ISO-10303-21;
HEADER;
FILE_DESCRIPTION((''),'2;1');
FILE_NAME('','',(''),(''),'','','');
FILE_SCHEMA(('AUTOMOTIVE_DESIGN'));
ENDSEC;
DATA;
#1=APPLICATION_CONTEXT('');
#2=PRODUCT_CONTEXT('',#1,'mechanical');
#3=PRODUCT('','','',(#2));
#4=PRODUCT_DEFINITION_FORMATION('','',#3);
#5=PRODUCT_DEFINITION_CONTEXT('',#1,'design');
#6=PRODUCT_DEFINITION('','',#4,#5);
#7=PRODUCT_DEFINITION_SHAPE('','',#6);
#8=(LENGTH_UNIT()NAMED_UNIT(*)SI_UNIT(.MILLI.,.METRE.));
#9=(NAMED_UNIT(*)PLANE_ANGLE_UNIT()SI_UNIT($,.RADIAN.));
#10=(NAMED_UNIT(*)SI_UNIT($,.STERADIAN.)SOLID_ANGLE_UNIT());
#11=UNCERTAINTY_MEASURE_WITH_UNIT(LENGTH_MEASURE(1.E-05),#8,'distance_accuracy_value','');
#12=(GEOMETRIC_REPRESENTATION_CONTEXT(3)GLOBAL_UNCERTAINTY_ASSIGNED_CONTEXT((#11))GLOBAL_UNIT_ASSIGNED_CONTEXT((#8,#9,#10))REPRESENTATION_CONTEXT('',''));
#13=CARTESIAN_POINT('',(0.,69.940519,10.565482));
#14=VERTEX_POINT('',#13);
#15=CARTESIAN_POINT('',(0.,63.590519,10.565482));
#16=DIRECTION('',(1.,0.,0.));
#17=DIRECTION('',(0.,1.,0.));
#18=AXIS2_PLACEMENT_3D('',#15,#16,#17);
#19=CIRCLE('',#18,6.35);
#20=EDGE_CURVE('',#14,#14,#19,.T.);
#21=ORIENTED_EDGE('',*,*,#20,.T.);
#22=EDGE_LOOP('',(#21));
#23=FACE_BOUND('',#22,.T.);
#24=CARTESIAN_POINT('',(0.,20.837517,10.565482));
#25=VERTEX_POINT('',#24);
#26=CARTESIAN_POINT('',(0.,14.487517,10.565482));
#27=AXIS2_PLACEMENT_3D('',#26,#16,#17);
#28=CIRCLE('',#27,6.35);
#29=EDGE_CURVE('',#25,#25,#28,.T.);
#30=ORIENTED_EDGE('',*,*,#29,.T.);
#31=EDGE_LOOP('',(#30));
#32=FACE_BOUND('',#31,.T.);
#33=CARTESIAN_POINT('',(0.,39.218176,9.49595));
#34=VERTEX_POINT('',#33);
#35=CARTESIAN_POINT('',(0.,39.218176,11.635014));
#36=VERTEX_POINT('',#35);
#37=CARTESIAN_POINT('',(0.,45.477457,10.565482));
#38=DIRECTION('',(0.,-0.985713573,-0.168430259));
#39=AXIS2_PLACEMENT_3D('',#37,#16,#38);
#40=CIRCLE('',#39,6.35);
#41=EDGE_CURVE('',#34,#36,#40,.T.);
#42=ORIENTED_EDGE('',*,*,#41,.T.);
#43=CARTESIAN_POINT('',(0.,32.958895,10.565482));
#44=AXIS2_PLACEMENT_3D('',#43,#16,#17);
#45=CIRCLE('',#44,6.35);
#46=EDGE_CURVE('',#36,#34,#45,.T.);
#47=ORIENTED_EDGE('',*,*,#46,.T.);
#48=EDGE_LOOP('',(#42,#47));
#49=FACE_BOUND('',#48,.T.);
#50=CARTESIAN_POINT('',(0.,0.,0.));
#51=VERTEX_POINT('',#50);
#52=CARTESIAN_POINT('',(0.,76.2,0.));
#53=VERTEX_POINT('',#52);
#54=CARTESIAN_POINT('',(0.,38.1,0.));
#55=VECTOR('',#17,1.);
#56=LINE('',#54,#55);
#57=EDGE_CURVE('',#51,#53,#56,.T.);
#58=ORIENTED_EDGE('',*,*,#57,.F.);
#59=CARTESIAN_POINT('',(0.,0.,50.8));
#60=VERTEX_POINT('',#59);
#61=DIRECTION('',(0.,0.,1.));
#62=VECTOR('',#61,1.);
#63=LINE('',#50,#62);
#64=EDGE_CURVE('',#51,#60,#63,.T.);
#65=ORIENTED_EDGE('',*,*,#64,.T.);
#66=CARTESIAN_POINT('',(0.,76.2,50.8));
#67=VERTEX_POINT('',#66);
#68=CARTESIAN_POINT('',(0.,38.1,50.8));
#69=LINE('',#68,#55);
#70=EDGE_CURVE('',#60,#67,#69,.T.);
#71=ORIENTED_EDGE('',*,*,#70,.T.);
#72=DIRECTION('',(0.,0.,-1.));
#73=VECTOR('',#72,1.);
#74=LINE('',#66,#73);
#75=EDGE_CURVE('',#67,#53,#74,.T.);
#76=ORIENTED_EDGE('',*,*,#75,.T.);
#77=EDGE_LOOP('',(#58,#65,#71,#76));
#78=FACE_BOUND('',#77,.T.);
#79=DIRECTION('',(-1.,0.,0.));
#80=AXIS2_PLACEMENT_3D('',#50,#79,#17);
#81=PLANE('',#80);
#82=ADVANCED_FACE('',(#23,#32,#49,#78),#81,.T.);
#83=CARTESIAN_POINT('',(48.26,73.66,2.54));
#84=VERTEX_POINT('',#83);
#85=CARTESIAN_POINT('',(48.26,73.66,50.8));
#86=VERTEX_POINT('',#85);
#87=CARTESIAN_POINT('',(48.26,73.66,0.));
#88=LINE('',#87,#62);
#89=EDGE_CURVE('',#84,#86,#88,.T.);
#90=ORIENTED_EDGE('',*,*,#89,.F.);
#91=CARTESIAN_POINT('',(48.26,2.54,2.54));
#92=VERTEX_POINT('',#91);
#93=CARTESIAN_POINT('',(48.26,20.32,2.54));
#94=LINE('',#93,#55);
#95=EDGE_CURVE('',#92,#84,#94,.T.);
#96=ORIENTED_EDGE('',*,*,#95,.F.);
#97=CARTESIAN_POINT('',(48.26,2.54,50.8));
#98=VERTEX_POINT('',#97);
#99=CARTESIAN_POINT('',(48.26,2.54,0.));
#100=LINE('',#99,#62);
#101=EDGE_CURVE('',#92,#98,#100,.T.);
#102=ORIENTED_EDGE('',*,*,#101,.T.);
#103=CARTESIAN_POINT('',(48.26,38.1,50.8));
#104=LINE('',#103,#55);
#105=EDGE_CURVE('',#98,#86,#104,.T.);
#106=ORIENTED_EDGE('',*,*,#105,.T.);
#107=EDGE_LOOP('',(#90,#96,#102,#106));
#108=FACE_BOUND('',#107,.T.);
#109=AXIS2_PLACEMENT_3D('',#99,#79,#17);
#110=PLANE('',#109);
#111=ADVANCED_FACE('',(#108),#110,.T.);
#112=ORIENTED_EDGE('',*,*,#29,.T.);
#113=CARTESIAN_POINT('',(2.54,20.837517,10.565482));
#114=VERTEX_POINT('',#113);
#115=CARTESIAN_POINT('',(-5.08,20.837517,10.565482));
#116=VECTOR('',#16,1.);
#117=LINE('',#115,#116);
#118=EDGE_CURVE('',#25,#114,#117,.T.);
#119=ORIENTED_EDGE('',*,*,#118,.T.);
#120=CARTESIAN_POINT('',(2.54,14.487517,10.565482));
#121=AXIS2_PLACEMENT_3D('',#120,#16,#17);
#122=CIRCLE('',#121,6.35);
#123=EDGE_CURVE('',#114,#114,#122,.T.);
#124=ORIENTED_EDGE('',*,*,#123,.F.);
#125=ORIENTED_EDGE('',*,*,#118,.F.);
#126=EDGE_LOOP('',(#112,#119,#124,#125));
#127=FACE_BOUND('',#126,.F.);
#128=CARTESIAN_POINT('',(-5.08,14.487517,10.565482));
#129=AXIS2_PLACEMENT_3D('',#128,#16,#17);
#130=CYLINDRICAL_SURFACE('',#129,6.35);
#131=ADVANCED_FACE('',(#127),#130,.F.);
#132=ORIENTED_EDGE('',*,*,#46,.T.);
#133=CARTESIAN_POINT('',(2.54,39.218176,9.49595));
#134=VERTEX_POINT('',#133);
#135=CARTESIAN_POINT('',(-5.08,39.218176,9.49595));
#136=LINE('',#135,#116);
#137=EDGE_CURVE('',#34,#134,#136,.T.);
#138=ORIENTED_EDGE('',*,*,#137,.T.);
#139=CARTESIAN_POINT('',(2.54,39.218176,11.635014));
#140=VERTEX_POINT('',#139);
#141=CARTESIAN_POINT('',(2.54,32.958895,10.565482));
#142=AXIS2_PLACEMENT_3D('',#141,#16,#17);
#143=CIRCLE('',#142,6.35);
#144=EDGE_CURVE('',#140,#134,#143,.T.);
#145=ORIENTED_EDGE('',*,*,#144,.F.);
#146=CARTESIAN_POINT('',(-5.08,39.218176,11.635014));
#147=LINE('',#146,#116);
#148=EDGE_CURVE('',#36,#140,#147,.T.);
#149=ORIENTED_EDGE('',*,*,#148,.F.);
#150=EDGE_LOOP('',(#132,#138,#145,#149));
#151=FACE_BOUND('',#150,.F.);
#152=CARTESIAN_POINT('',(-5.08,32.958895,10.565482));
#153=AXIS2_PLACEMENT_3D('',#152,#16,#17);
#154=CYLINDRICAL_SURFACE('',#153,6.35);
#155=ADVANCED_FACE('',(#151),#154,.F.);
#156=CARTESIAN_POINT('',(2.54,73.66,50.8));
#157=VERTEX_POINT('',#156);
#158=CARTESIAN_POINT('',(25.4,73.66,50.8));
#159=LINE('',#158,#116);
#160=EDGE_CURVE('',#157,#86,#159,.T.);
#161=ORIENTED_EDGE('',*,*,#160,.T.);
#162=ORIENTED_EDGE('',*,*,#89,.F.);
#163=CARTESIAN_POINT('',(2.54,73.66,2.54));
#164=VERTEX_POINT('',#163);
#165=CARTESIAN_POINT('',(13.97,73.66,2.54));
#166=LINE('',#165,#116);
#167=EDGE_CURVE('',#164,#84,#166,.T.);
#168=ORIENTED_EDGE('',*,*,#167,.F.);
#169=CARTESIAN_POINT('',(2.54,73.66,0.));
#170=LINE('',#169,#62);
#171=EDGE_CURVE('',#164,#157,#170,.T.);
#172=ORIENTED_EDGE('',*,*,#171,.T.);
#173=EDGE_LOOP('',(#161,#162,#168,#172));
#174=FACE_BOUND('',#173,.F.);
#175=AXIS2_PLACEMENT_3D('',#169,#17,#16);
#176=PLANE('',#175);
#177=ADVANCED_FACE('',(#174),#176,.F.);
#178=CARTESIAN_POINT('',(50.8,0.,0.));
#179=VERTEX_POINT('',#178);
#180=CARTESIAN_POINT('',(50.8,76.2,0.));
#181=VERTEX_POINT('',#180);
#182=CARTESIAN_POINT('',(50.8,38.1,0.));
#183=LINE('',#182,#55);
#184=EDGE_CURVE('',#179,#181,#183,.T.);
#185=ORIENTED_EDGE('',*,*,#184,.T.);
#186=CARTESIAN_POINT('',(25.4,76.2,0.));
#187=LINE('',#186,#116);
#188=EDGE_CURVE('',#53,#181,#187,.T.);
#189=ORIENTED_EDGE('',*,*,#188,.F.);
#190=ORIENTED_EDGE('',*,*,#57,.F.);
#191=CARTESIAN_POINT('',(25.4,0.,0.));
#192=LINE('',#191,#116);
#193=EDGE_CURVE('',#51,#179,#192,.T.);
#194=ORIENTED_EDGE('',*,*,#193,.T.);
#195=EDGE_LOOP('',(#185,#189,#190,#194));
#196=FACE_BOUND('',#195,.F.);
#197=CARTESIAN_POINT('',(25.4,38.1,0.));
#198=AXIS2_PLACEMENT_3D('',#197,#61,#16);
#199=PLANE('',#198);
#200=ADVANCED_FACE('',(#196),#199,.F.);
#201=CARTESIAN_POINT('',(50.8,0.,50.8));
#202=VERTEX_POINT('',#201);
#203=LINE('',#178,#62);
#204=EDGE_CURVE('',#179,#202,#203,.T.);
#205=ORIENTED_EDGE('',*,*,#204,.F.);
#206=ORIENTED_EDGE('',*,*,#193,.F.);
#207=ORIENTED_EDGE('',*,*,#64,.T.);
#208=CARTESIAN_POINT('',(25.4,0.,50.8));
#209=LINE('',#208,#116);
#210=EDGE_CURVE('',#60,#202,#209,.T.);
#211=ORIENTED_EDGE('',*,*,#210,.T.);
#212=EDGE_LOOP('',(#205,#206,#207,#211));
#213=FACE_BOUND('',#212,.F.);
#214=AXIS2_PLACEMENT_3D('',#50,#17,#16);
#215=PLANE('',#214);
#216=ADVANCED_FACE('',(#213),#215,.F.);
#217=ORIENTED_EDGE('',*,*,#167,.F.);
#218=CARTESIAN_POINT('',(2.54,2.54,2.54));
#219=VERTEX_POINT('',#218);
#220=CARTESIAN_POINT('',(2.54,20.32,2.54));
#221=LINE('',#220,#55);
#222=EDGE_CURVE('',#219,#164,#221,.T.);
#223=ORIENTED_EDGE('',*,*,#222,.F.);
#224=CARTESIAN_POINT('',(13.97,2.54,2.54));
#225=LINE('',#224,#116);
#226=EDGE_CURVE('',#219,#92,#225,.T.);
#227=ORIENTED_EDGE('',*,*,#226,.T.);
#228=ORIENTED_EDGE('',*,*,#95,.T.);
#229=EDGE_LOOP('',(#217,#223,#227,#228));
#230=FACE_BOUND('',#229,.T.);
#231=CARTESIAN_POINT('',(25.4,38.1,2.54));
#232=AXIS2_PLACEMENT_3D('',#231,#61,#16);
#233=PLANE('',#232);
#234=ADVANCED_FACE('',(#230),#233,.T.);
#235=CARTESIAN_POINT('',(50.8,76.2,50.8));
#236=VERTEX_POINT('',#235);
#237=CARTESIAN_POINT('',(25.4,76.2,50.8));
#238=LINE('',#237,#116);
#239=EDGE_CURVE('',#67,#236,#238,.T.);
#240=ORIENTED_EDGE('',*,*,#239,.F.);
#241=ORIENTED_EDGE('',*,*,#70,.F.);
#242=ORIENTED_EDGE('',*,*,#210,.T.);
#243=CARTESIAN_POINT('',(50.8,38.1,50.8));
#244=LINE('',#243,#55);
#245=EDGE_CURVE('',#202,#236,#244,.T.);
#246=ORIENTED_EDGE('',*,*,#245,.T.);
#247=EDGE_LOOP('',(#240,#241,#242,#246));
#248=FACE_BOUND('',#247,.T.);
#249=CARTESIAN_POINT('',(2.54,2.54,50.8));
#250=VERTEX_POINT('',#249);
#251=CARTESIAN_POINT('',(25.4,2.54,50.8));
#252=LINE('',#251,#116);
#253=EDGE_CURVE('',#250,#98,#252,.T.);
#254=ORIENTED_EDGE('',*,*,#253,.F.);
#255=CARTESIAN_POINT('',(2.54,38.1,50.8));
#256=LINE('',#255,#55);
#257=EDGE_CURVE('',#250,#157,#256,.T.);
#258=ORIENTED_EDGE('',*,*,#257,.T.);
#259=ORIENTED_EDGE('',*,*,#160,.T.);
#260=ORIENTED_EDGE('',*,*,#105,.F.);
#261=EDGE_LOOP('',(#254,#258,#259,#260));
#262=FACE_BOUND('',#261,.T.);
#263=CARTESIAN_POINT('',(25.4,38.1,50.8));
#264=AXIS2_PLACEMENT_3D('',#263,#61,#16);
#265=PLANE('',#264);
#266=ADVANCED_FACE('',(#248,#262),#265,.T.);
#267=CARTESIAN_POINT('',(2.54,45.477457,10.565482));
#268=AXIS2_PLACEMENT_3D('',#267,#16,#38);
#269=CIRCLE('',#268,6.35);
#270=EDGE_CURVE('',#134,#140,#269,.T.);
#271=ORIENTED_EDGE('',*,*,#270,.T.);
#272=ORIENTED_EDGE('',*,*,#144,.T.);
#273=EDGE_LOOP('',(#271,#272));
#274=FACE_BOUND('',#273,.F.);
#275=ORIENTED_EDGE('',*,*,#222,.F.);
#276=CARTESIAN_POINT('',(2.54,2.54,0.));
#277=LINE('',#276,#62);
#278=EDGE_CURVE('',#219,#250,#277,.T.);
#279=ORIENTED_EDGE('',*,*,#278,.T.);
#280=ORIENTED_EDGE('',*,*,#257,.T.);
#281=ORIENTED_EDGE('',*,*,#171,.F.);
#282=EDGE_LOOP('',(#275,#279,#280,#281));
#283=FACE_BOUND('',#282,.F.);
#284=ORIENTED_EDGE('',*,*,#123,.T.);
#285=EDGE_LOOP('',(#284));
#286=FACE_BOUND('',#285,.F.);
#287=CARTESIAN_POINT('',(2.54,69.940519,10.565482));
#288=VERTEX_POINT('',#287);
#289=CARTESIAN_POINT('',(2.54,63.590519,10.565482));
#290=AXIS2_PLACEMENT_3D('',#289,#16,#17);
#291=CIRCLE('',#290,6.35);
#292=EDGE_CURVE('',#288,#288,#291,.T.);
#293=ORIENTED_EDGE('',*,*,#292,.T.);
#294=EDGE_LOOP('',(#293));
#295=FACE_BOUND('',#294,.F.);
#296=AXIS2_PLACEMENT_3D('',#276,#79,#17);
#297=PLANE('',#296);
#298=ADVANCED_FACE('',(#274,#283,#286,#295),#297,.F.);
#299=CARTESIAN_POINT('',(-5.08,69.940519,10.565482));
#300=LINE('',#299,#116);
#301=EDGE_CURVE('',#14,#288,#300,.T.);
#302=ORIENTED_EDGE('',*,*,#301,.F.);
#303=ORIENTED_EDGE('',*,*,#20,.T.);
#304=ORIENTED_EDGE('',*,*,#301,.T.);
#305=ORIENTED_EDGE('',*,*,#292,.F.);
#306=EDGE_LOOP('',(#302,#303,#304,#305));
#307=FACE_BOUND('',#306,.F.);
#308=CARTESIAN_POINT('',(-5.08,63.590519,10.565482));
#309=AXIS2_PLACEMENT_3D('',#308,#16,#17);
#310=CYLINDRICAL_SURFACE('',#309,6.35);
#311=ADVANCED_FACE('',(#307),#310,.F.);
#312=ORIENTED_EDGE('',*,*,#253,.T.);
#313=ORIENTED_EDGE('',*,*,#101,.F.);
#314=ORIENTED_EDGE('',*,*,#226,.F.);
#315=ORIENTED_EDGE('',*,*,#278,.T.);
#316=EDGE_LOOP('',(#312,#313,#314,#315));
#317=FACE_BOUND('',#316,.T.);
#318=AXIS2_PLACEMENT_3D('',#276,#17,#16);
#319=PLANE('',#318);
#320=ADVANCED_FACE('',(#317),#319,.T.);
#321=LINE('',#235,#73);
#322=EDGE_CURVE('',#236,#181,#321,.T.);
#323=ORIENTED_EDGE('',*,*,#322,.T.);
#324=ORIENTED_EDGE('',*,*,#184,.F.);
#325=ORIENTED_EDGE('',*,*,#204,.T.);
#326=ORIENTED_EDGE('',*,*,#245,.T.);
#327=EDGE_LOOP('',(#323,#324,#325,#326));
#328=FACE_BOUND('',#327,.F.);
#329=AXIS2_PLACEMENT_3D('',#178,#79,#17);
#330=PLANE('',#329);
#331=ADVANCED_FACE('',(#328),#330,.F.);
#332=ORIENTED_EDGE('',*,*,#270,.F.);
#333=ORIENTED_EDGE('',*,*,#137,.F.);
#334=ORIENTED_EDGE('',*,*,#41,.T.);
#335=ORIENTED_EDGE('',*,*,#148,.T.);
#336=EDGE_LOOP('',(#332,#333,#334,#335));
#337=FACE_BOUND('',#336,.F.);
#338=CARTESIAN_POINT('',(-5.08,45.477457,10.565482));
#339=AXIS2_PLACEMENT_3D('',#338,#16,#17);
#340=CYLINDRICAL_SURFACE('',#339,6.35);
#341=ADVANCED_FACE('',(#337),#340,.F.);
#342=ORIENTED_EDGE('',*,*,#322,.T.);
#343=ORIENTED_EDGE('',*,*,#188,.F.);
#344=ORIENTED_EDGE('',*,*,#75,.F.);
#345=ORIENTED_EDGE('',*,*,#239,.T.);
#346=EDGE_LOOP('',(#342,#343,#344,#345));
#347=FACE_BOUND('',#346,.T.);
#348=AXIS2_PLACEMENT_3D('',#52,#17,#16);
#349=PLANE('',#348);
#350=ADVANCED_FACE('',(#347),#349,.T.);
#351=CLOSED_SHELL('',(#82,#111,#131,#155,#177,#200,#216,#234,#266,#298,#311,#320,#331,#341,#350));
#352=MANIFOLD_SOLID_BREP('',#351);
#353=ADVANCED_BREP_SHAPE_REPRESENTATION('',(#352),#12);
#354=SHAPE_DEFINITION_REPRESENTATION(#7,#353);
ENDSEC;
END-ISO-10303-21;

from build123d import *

# Parameters (mm, degrees)
F2_W     = 50.8
F2_H     = 76.2
F2_W_2   = 45.72
F2_H_2   = 71.12
F3_DEPTH = 50.8
F4_W     = 50.8
F4_H     = 76.2
F5_DEPTH = 2.54
F8_D     = 12.7
F8_DEPTH = 5.08
F8_TIP   = 3.8154649308


# Not quite as in the source:
# - a variable given as a bare number and used for a length is read in inches; the dataset says mm whatever the document's units were


with BuildPart() as f3:
    # F2 (on Top) → F3 (new body)
    with BuildSketch(Plane.XY):
        with Locations((25.4, 38.1)):
            Rectangle(F2_W, F2_H)
        with Locations((25.4, 38.1)):
            Rectangle(F2_W_2, F2_H_2, mode=Mode.SUBTRACT)
    extrude(amount=F3_DEPTH)

    # F4 (on Top) → F5 (join)
    with BuildSketch(Plane.XY):
        with Locations((25.4, 38.1)):
            Rectangle(F4_W, F4_H)
    extrude(amount=F5_DEPTH)

    # F8
    with Locations(Plane(origin=(0, 0, 0), x_dir=(0, -1, 0), z_dir=(-1, 0, 0))):
        with Locations((-14.4875170663, 10.56548208), (-32.958894968, 10.56548208), (-45.4774573445, 10.56548208), (-63.5905191302, 10.56548208)):
            Hole(F8_D / 2, depth=F8_DEPTH)
            with Locations((0, 0, -(F8_DEPTH + F8_TIP / 2))):  # 118° drill point
                Cone(0, F8_D / 2, F8_TIP, mode=Mode.SUBTRACT)


solid = f3.part
